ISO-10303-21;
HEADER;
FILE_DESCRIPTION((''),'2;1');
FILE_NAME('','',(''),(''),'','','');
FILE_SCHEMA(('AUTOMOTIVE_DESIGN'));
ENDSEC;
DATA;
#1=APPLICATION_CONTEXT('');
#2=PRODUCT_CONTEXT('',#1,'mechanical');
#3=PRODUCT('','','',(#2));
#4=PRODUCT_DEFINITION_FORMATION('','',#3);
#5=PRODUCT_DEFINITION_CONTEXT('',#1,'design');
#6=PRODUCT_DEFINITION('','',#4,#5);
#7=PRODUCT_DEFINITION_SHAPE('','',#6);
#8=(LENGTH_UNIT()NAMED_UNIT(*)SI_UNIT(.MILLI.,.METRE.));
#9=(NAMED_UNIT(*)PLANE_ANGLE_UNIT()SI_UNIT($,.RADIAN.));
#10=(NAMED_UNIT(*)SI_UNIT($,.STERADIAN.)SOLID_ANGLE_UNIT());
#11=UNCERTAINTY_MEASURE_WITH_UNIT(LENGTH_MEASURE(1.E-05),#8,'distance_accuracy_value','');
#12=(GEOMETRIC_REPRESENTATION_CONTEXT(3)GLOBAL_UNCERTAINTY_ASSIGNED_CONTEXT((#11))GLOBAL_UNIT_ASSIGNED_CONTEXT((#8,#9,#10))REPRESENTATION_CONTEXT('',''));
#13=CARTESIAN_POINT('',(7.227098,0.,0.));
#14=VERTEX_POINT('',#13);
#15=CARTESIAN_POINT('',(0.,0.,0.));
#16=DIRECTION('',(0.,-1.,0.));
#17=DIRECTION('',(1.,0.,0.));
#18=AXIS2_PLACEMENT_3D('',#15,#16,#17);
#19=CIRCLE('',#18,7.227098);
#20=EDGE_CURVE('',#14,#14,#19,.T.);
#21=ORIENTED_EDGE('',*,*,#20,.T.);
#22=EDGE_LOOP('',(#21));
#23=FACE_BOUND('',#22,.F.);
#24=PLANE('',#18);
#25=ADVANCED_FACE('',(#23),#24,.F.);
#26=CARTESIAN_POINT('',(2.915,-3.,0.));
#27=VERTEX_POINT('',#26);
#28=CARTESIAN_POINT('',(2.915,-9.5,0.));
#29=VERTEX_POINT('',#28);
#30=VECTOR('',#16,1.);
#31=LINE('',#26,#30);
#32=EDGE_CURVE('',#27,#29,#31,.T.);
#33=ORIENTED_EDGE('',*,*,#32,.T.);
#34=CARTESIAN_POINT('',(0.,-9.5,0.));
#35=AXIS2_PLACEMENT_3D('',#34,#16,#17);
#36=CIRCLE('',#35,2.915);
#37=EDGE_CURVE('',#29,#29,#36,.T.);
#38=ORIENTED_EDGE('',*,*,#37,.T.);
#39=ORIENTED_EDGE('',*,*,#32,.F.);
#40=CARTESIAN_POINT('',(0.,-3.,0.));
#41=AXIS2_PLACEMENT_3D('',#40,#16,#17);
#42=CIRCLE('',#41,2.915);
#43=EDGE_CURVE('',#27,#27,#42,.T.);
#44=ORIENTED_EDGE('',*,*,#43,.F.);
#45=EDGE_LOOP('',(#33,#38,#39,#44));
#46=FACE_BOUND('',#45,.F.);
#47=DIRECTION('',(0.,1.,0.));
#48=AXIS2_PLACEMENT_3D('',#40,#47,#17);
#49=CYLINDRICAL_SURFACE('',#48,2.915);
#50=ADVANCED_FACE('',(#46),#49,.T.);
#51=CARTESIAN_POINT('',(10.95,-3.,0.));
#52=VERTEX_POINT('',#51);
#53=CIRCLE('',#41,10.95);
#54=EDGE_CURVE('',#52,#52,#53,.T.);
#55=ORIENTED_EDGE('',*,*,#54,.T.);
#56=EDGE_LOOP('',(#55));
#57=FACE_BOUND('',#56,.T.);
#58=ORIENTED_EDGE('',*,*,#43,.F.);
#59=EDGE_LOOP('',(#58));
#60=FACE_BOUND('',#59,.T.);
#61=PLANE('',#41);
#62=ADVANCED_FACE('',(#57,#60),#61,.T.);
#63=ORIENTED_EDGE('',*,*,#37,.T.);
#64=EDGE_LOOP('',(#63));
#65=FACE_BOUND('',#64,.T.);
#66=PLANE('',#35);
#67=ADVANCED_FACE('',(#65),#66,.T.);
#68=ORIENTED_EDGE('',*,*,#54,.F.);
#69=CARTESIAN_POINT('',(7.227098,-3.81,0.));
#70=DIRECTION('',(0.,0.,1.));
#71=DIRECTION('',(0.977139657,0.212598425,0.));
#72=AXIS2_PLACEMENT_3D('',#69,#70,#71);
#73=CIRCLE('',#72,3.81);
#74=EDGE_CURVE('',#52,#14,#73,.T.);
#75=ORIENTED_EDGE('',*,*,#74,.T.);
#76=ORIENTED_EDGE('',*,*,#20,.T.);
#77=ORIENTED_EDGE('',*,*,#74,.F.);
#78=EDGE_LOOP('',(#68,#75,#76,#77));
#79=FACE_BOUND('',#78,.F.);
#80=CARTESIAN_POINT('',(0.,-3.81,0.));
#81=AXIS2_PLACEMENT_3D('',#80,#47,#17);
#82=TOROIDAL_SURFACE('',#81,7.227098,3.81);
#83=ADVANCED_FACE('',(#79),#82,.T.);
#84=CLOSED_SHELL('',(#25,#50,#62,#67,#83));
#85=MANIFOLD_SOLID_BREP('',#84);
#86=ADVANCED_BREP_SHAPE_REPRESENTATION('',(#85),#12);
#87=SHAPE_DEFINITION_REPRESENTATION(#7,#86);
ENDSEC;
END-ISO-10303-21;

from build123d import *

# Parameters (mm, degrees)
F0_R     = 10.95
F1_DEPTH = 3
F2_R     = 2.915
F3_DEPTH = 6.5


# Not quite as in the source:
# - a fillet or chamfer that OpenCascade refuses, or shapes differently, is made with other operations: its cross-section is extruded or revolved along the edge and cut away or added


with BuildPart() as f1:
    # F0 (on Front) → F1 (new body)
    with BuildSketch(Plane.XZ):
        Circle(F0_R)
    extrude(amount=F1_DEPTH)

    # F2 (on face) → F3 (join)
    with BuildSketch(Plane.XZ.offset(3)):
        Circle(F2_R)
    extrude(amount=F3_DEPTH)

    # F4: fillet of radius 3.81 on 1 edges, made by hand

    # F4_s1 → F4_t2 (revolve, cut)
    with BuildSketch(Plane.XY):
        with BuildLine():
            ThreePointArc((10.95, -3), (9.6177045238, -0.843335206), (7.2270979062, 0))
            Line((7.2270979062, 0), (10.95, 0))
            Line((10.95, 0), (10.95, -3))
        make_face()
    revolve(axis=Axis((0, 0, 0), (0, -1, 0)), mode=Mode.SUBTRACT)


solid = f1.part
